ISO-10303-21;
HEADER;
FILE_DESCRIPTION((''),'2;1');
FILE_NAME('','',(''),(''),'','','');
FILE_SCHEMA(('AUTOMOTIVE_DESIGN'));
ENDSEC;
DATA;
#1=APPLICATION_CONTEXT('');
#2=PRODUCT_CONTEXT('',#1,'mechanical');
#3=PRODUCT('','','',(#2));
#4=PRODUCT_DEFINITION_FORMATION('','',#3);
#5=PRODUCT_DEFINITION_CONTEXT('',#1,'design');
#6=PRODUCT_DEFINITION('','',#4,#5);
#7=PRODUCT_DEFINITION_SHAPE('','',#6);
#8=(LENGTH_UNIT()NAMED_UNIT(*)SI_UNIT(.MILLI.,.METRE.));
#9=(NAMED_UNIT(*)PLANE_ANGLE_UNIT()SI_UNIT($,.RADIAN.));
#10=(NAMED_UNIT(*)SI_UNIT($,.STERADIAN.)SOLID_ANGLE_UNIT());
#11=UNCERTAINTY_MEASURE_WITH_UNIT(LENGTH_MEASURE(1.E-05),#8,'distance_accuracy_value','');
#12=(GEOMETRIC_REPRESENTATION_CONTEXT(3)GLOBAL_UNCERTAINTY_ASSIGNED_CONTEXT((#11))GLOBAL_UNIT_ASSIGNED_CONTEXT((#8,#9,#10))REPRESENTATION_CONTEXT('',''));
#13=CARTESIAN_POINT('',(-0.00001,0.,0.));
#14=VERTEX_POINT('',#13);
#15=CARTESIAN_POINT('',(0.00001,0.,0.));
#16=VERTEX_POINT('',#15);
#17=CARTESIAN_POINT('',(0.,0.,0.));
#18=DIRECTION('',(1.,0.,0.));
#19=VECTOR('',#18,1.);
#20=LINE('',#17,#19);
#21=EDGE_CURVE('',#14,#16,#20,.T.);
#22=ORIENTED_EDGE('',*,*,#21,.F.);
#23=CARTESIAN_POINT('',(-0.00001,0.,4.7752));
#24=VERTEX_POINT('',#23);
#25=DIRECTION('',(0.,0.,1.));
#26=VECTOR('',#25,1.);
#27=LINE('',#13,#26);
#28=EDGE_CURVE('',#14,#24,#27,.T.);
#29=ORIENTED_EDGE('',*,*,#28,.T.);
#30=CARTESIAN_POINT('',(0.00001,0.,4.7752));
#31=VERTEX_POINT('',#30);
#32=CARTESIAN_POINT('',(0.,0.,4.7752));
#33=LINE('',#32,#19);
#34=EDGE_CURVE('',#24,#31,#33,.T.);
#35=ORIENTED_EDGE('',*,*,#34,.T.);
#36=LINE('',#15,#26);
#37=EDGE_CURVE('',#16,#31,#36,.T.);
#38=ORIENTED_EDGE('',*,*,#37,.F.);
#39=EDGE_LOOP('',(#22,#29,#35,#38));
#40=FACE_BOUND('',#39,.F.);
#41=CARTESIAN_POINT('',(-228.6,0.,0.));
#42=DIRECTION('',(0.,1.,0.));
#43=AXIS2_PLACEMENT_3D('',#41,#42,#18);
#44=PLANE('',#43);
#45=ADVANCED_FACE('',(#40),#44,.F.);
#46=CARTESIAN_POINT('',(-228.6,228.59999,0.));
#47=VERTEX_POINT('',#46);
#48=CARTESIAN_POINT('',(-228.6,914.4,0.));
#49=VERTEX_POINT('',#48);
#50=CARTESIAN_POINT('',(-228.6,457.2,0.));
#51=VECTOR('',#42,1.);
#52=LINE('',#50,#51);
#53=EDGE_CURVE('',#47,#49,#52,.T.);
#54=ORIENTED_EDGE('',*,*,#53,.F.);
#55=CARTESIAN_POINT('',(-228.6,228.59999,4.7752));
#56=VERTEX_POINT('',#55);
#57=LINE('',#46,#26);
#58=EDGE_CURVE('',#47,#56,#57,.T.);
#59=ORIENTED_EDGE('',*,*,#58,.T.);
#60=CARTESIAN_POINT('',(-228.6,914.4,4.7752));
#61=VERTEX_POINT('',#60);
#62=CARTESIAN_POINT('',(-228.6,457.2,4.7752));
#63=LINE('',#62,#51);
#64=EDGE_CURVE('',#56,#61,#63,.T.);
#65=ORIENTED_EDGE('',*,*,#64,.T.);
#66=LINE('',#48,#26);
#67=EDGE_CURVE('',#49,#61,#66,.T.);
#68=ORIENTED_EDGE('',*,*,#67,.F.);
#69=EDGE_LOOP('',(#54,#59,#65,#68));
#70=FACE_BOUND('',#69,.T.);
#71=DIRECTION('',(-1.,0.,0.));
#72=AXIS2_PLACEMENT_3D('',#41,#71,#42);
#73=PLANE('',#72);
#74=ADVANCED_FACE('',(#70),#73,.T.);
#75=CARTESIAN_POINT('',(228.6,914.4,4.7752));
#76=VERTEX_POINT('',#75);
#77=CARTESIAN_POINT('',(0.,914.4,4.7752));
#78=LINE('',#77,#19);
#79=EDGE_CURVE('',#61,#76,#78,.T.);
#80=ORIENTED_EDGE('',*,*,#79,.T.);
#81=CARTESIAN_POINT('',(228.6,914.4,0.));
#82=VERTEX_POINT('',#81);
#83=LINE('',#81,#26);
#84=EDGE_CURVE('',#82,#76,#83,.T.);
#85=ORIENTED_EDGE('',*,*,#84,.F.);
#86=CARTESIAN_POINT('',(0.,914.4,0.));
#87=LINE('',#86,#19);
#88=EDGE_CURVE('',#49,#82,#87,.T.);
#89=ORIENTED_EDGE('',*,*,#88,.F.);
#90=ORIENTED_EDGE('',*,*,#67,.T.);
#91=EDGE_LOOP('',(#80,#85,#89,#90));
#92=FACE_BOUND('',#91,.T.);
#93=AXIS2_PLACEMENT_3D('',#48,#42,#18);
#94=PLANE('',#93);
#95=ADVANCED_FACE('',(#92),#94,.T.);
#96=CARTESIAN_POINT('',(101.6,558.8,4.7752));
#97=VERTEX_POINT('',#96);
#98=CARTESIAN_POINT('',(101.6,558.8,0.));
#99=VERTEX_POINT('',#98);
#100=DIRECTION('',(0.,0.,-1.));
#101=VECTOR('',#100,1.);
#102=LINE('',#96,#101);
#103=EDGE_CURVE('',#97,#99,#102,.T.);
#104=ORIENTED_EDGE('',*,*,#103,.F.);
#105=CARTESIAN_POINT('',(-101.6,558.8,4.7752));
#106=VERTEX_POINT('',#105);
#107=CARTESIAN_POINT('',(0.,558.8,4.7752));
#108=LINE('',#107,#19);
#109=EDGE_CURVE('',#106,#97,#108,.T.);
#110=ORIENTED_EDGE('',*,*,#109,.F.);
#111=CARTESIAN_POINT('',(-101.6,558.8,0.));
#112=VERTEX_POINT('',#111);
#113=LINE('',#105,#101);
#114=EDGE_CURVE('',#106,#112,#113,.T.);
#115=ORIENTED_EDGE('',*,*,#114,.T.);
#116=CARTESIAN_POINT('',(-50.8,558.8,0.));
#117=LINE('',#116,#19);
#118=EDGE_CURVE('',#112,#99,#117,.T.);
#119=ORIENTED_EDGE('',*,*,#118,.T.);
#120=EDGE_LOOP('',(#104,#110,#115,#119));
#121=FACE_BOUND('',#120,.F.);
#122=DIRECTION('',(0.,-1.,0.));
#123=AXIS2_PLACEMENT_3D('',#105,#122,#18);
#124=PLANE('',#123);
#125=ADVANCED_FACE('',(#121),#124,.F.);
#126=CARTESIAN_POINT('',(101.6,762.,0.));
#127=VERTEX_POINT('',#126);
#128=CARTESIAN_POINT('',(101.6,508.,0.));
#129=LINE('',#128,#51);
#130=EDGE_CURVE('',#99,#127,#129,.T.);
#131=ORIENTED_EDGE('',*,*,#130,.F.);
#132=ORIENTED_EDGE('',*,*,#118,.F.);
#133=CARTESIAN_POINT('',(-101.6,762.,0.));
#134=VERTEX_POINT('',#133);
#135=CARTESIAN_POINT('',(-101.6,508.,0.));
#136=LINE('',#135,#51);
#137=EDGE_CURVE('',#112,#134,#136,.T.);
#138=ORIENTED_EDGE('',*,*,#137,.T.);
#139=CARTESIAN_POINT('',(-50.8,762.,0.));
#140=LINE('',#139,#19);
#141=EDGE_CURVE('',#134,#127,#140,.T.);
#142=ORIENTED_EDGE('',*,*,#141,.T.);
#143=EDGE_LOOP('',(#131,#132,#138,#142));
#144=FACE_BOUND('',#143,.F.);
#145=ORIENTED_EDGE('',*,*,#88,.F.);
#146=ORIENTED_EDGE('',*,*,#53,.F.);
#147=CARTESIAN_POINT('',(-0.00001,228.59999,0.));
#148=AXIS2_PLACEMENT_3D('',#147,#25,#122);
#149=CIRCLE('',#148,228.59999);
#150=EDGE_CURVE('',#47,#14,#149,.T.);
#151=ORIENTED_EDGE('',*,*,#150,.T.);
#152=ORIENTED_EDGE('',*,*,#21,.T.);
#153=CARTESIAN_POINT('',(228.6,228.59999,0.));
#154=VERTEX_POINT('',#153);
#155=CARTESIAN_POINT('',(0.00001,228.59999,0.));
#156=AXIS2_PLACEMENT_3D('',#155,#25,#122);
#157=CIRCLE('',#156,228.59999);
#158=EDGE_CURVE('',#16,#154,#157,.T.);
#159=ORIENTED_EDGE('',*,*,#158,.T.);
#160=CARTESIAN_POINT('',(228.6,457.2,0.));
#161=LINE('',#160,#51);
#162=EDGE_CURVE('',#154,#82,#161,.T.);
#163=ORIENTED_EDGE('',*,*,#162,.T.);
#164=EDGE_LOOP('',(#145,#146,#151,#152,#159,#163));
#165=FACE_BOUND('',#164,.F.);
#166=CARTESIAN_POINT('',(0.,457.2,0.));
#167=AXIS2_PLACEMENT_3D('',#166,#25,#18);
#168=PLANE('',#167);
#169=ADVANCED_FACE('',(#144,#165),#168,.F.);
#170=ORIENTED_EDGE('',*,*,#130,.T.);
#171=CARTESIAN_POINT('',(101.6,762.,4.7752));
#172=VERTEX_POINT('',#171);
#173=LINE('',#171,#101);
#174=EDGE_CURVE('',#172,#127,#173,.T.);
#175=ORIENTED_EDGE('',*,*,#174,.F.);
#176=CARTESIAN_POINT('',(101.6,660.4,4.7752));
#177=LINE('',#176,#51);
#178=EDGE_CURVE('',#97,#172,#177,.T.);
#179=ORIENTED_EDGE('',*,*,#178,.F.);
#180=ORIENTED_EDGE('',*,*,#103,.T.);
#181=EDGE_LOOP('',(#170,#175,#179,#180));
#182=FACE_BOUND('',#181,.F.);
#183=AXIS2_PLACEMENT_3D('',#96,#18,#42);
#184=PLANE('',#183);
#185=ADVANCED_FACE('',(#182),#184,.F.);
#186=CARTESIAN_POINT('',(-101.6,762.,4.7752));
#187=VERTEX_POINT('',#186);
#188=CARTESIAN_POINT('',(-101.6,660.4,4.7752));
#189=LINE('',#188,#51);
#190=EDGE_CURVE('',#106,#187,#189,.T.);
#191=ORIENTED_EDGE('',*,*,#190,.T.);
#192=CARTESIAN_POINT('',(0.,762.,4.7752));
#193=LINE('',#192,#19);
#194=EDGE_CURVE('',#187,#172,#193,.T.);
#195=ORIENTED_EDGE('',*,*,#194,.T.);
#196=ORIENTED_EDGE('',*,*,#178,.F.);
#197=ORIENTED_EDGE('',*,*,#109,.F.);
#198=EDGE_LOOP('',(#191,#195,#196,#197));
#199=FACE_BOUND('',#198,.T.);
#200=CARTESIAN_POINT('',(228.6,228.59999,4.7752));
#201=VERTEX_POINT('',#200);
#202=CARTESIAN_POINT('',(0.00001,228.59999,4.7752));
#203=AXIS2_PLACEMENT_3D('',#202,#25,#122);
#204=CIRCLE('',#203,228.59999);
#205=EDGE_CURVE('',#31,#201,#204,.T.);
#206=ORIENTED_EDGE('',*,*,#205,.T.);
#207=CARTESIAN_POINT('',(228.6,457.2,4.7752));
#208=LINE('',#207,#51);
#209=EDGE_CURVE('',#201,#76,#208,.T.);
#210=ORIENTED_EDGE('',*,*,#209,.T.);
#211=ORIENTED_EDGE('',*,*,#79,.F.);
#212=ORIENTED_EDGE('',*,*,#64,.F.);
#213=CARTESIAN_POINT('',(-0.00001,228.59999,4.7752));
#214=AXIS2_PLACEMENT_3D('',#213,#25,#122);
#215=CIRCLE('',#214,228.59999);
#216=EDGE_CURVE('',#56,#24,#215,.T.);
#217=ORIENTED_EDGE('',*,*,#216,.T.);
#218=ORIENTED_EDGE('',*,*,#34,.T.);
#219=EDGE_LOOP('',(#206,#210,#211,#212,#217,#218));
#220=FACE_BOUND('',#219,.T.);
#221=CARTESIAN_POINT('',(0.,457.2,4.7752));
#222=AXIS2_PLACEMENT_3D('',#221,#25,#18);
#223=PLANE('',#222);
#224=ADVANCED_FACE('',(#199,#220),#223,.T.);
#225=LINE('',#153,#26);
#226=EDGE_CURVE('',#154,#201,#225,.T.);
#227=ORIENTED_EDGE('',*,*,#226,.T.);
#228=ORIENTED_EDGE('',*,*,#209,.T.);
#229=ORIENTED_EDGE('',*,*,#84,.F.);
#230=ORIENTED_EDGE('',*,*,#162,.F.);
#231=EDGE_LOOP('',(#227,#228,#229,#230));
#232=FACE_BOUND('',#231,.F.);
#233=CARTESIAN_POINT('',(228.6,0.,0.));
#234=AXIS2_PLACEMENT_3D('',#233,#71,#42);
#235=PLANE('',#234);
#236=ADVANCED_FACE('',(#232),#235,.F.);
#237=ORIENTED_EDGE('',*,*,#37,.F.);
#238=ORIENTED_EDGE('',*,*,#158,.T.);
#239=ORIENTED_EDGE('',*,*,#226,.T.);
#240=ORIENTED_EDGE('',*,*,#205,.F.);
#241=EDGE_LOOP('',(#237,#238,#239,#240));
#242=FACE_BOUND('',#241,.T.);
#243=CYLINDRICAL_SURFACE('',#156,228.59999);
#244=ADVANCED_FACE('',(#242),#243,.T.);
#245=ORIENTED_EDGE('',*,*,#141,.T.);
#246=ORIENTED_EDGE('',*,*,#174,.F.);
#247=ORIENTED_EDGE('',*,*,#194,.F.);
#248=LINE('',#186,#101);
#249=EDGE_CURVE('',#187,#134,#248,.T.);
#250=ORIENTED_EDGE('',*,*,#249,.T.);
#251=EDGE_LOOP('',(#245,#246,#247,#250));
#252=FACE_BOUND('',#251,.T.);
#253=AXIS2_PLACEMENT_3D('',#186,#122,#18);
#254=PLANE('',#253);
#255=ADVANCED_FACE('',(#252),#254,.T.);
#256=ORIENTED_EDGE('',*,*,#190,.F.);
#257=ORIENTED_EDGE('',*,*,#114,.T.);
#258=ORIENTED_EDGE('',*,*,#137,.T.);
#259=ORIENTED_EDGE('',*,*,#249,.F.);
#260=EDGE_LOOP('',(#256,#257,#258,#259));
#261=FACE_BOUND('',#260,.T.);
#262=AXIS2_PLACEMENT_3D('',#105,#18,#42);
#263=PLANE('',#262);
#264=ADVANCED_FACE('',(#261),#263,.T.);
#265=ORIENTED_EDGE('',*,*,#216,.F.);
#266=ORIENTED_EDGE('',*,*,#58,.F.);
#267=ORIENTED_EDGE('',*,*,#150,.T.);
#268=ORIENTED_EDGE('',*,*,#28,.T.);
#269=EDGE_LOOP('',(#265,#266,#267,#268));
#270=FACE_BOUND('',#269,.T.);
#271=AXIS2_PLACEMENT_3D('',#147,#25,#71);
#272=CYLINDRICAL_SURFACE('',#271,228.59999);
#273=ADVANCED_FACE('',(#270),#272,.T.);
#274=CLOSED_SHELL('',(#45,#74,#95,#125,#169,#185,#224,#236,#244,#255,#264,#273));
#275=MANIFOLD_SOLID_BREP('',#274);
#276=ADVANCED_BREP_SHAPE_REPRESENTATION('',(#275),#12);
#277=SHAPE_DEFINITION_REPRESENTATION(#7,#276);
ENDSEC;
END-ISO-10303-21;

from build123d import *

# Parameters (mm, degrees)
F0_W     = 457.2
F0_H     = 914.4
F1_DEPTH = 4.7752
F2_R     = 228.59999
F3_W     = 203.2
F3_H     = 203.2
F4_DEPTH = 25.399999693


# Not quite as in the source:
# - a fillet or chamfer is up to 0.001 mm smaller than in the source, because OpenCascade refuses the exact size
# - ends of sketch curves that miss each other by under 0.0002 mm in the source are joined


with BuildPart() as f1:
    # F0 (on Top) → F1 (new body)
    with BuildSketch(Plane.XY):
        with Locations((0, 457.2)):
            Rectangle(F0_W, F0_H)
    extrude(amount=F1_DEPTH)

    # F2 (radius 228.6 in the source; OpenCascade refuses exactly that, so slightly less here)
    f2_edges = [f1.edges().sort_by_distance(p)[0] for p in [
        (228.6, 0, 2.3876),
        (-228.6, 0, 2.3876),
    ]]
    fillet(f2_edges, radius=F2_R)

    # F3 (on face) → F4 (intersect)
    with BuildSketch(Plane.XY.offset(4.7752)):
        with BuildLine():
            Line((-228.6, 914.4), (-228.6, 228.59999))
            ThreePointArc((-228.6, 228.59999), (-161.6446131082, 66.9553868918), (-1e-05, 0))
            ThreePointArc((-1e-05, 0), (161.6446131082, 66.9553868918), (228.6, 228.59999))
            Line((228.6, 228.59999), (228.6, 914.4))
            Line((228.6, 914.4), (-228.6, 914.4))
        make_face()
        with Locations((0, 660.4)):
            Rectangle(F3_W, F3_H, mode=Mode.SUBTRACT)
    extrude(amount=-F4_DEPTH, mode=Mode.INTERSECT)


solid = f1.part
